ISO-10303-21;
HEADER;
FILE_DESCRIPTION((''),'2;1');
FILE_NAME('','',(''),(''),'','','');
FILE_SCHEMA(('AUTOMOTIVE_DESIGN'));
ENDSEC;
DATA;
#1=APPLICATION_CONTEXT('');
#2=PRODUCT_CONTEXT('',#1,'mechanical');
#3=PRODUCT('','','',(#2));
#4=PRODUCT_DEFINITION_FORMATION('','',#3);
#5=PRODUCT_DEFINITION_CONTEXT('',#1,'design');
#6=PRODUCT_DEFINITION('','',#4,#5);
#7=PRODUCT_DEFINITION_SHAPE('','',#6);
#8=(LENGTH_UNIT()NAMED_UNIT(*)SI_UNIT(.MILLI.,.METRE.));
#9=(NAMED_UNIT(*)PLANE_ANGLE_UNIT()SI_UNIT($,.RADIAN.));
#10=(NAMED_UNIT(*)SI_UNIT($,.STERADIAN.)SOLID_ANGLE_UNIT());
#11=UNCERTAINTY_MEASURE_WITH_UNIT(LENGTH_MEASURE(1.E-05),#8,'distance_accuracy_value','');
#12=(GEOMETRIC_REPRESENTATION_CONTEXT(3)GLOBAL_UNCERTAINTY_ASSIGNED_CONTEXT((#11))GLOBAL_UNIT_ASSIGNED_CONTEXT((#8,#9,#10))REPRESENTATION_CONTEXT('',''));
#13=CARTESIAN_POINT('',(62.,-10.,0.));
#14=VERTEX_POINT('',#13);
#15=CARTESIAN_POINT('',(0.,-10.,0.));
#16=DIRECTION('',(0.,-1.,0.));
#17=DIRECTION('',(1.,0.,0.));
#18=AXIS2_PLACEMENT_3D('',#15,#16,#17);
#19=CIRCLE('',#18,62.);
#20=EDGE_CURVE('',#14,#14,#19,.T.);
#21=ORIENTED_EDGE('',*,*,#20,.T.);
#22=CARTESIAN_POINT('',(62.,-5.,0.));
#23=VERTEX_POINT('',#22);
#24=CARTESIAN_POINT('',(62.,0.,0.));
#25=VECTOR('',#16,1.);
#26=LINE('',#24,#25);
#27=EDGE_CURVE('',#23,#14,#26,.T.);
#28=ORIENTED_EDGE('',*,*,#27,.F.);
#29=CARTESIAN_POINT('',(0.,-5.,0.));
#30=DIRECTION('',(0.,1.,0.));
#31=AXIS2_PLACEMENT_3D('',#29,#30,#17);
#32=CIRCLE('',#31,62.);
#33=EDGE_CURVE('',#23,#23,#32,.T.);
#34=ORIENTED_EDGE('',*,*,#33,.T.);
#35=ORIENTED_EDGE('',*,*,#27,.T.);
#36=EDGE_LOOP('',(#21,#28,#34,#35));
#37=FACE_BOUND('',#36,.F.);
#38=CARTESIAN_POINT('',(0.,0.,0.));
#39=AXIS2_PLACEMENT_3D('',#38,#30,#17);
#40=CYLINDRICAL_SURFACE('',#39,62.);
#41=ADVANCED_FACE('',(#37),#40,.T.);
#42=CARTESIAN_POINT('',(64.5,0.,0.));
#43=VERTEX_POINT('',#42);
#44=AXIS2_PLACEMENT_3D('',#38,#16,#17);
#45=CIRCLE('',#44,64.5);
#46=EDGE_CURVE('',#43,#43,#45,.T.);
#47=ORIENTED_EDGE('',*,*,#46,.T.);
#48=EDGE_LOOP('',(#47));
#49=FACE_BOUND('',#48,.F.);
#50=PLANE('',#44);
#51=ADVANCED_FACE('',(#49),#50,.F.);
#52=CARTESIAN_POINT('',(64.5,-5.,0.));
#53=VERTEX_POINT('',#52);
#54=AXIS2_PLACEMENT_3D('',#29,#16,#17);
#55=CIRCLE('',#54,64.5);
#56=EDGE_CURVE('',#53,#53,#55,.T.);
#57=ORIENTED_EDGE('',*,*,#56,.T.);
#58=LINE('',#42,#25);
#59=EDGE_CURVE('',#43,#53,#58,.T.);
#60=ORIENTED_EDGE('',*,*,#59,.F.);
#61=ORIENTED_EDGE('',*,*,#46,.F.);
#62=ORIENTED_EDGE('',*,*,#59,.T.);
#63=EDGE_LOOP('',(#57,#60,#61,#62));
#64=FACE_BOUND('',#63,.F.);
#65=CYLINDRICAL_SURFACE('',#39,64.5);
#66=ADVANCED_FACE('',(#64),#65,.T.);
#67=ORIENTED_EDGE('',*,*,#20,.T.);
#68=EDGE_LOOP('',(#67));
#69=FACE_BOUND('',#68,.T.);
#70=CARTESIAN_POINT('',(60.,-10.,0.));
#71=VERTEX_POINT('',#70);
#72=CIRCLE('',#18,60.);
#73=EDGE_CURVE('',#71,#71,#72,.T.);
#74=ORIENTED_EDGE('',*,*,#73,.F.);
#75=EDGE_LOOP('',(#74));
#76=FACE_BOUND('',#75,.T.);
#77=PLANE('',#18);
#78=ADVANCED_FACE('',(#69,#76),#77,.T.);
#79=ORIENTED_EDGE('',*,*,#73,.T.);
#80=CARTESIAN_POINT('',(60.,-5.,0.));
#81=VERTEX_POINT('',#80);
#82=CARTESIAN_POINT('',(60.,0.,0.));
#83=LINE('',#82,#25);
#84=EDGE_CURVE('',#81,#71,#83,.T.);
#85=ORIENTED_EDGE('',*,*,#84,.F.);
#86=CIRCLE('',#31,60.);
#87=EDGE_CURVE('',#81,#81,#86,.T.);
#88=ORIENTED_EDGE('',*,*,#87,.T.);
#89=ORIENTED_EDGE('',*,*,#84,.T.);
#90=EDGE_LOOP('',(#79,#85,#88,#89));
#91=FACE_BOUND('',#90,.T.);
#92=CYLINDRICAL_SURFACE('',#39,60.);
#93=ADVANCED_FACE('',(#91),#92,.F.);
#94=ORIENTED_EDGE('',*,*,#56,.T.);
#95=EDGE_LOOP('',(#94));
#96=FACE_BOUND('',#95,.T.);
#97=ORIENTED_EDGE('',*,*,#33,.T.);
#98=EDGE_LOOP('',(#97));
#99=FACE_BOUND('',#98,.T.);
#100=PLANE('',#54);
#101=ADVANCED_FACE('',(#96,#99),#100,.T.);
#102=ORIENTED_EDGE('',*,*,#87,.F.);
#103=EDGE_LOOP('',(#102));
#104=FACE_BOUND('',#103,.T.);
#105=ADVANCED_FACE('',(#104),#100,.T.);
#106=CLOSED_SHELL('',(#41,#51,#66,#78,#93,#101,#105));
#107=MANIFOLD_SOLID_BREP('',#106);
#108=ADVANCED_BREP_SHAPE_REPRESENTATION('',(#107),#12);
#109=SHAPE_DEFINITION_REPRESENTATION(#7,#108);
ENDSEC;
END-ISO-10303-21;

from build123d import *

# Parameters (mm, degrees)
F0_R     = 64.5
F0_R_2   = 62
F0_R_3   = 60
F1_DEPTH = 5
F2_DEPTH = 10


with BuildPart() as f1:
    # F0 (on Front) → F1 (new body)
    with BuildSketch(Plane.XZ):
        Circle(F0_R)
        Circle(F0_R_2, mode=Mode.SUBTRACT)
        Circle(F0_R_2)
        Circle(F0_R_3, mode=Mode.SUBTRACT)
        Circle(F0_R_3)
    extrude(amount=F1_DEPTH)

    # F0 (on Front) → F2 (join)
    with BuildSketch(Plane.XZ):
        Circle(F0_R_2)
        Circle(F0_R_3, mode=Mode.SUBTRACT)
    extrude(amount=F2_DEPTH)


solid = f1.part
